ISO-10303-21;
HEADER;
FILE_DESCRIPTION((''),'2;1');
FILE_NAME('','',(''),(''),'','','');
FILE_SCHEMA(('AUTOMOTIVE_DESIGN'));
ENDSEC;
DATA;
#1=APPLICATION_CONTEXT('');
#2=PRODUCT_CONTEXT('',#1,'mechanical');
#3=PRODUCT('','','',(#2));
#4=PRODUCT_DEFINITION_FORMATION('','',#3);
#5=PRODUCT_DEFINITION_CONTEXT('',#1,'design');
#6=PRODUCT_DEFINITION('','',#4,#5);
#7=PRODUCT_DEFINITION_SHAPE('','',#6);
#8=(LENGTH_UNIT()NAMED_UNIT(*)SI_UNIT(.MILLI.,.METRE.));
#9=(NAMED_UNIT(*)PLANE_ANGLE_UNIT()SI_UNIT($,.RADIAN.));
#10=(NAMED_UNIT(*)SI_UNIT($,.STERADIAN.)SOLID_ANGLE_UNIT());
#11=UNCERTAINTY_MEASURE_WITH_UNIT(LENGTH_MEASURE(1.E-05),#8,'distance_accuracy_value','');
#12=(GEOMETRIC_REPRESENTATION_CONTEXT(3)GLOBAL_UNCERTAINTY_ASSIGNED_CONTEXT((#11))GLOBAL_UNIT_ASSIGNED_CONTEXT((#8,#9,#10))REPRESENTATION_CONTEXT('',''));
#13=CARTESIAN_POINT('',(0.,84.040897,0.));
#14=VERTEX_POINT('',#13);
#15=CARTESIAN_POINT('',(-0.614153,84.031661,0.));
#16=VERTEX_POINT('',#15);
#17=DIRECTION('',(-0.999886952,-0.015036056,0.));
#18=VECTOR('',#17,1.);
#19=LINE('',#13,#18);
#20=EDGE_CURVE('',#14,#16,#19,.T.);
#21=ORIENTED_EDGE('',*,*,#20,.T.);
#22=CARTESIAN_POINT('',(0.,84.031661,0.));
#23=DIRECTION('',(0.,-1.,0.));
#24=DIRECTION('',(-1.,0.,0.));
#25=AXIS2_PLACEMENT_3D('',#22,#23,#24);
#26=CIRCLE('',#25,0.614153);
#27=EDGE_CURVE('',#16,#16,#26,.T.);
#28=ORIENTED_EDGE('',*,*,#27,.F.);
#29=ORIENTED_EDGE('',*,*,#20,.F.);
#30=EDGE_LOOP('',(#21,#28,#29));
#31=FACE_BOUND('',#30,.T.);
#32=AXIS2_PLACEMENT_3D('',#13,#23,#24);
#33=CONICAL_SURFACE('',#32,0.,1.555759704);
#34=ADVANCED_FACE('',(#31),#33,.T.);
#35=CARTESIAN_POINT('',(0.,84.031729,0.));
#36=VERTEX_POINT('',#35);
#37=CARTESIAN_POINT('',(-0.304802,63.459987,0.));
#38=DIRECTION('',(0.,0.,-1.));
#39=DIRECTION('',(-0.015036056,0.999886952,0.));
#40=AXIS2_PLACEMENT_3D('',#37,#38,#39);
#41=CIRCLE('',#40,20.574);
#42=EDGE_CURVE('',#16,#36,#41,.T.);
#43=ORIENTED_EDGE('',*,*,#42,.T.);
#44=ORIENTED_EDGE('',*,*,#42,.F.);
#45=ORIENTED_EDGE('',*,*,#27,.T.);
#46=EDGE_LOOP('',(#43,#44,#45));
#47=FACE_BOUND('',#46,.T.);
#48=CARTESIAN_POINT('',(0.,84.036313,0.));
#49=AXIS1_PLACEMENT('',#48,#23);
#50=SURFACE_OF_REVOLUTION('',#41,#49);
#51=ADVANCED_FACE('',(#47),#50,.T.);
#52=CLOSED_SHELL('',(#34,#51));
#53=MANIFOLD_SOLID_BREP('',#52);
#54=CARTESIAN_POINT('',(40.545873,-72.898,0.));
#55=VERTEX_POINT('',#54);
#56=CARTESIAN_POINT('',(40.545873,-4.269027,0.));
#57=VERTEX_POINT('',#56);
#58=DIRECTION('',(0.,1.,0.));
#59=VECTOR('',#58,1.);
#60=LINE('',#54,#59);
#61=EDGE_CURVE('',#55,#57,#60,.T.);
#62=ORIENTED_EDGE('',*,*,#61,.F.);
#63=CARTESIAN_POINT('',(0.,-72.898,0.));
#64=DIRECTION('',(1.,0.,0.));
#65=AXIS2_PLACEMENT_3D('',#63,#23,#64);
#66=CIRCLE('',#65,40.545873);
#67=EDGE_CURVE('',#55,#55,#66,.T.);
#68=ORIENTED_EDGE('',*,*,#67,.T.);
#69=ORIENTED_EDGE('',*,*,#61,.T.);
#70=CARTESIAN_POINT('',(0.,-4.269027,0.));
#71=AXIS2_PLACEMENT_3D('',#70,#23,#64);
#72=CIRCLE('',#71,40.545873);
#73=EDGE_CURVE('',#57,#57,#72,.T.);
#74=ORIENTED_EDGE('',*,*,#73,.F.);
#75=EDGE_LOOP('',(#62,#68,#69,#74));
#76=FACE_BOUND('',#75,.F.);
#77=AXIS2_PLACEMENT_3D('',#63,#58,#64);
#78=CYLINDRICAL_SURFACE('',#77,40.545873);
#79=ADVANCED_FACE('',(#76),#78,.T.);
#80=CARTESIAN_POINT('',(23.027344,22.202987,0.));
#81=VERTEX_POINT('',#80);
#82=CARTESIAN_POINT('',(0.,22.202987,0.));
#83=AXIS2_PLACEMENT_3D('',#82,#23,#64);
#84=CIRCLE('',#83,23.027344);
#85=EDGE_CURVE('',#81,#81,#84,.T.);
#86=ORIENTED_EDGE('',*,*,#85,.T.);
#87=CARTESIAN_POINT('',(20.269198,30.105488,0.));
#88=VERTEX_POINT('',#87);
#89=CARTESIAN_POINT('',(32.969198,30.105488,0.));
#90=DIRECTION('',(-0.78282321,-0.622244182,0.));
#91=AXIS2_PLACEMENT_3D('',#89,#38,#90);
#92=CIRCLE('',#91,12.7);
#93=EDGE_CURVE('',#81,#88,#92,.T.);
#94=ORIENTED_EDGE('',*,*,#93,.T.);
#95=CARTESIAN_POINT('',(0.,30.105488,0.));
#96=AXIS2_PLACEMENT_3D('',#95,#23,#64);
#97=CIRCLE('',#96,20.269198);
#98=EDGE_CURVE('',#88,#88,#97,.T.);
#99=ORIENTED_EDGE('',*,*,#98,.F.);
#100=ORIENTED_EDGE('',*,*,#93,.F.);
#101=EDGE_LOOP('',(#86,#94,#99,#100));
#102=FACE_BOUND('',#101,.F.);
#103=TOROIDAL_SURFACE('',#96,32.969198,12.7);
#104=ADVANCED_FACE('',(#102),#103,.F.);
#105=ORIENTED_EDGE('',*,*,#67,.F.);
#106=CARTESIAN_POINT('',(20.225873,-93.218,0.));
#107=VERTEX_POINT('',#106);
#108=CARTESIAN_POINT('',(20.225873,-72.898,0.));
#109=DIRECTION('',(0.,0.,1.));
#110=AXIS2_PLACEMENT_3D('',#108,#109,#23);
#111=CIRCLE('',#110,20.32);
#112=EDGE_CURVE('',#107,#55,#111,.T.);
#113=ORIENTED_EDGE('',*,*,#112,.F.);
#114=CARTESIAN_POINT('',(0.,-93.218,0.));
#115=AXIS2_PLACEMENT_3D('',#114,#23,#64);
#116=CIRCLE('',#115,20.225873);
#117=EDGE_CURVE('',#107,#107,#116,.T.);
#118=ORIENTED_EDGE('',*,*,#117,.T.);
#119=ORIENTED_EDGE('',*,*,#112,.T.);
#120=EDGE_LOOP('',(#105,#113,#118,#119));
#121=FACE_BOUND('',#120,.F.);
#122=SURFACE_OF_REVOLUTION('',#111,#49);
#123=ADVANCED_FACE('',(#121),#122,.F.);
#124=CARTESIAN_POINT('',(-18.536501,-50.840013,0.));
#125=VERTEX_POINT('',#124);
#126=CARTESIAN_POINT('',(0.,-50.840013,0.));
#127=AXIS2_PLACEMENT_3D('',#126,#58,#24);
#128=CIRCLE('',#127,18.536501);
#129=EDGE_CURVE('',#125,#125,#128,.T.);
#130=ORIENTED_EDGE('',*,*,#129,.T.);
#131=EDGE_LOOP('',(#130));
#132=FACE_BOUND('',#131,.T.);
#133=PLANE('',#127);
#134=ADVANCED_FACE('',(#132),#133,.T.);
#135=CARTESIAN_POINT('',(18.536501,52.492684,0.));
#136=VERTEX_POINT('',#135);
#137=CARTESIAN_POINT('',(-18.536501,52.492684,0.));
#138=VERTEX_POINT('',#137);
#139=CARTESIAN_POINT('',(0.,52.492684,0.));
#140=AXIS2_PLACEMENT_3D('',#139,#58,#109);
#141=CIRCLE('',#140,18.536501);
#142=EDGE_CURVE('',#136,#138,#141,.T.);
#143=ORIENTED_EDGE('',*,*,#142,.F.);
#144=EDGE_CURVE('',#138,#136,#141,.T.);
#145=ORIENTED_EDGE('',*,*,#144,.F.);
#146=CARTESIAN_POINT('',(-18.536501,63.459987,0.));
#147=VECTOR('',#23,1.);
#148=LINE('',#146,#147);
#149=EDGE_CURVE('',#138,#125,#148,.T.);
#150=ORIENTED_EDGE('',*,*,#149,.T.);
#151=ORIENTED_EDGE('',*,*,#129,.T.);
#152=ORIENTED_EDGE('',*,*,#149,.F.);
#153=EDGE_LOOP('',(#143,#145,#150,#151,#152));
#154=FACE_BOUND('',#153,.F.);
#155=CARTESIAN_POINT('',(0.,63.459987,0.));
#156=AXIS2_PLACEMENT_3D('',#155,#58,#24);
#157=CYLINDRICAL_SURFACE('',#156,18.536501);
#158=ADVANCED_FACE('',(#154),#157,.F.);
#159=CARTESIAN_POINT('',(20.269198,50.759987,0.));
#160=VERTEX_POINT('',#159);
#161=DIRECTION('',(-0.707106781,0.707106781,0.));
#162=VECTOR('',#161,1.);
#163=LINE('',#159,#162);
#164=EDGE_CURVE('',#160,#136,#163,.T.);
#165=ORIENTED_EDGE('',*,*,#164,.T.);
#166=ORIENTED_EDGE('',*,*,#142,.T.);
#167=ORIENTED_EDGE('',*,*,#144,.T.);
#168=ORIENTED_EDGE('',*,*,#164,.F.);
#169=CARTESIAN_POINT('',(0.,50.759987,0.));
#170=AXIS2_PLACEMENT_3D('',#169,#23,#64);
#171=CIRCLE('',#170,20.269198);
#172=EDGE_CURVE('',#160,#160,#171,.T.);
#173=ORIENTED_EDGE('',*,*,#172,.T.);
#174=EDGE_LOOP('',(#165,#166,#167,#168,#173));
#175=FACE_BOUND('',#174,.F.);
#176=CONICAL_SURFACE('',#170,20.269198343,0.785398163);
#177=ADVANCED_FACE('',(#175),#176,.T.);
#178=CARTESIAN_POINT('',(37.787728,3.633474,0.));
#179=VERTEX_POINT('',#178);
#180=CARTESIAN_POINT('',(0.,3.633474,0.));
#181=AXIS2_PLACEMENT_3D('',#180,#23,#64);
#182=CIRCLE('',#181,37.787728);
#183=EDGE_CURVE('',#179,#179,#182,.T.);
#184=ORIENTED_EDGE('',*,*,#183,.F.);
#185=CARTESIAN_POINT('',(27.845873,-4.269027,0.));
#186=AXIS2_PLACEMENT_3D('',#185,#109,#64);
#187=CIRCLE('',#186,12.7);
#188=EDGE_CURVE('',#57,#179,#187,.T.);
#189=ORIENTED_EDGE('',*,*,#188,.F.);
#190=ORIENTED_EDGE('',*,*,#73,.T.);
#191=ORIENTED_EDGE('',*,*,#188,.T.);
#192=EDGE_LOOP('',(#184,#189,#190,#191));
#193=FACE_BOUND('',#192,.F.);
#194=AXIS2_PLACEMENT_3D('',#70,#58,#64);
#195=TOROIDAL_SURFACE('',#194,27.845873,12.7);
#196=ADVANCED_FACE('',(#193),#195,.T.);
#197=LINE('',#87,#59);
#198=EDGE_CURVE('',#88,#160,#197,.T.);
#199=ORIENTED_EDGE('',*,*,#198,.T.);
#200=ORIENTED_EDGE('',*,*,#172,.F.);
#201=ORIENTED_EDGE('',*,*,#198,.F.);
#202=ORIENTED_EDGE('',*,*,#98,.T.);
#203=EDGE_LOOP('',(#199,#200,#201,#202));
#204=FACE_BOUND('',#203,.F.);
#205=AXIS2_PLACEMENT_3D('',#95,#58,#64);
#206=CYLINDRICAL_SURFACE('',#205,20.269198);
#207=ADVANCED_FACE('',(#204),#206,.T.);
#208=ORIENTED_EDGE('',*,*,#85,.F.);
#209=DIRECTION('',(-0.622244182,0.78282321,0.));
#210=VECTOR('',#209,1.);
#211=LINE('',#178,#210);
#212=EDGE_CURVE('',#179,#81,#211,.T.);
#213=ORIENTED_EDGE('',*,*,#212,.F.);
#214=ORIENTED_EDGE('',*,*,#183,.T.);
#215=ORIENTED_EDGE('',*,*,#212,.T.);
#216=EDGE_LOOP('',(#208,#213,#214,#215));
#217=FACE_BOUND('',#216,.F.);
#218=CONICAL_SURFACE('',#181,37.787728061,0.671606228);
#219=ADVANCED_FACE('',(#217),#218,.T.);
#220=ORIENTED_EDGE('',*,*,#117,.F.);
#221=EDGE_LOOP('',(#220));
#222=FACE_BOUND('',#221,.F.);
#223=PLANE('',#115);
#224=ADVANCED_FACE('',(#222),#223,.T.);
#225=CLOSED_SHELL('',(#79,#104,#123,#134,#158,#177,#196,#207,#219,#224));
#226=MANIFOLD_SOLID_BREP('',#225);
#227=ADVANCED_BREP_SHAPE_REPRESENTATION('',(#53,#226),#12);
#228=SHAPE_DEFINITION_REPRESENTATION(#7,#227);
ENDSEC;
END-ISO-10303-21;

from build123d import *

# Parameters (mm, degrees)
F5_R     = 18.5365010698
F6_DEPTH = 114.3


# Not quite as in the source:
# - a fillet or chamfer that OpenCascade refuses, or shapes differently, is made with other operations: its cross-section is extruded or revolved along the edge and cut away or added


with BuildPart() as f1:
    # F0 (on Top) → F1 (revolve)
    with BuildSketch(Plane.XY):
        with BuildLine():
            Line((0, 84.0317292744), (0, 84.0408968434))
            Line((0, 84.0408968434), (-0.6141534664, 84.0316613536))
            ThreePointArc((-0.6141534664, 84.0316613536), (-0.3070769866, 84.0339870748), (0, 84.0317292744))
        make_face()
    revolve(axis=Axis((0, 84.0363130589, 0), (0, -1, 0)))


with BuildPart() as f1b:
    # F0 (on Top) → F1, piece 2 (revolve)
    with BuildSketch(Plane.XY):
        with BuildLine():
            Line((0, 63.4599872006), (0, -93.2180002618))
            Line((0, -93.2180002618), (20.2258732946, -93.2180002618))
            ThreePointArc((20.2258732946, -93.2180002618), (34.5942830883, -87.2664100555), (40.5458732946, -72.8980002618))
            Line((40.5458732946, -72.8980002618), (40.5458732946, -4.2690273975))
            ThreePointArc((40.5458732946, -4.2690273975), (39.8365270619, -0.084027728), (37.7877280609, 3.6334737133))
            Line((37.7877280609, 3.6334737133), (23.0273435769, 22.2029869316))
            ThreePointArc((23.0273435769, 22.2029869316), (20.9785445759, 25.9204883728), (20.2691983432, 30.1054880424))
            Line((20.2691983432, 30.1054880424), (20.2691983432, 63.4599872006))
            Line((20.2691983432, 63.4599872006), (0, 63.4599872006))
        make_face()
    revolve(axis=Axis((0, 84.0363130589, 0), (0, -1, 0)))

    # F5 (on face) → F6 (cut)
    with BuildSketch(Plane(origin=(0, 63.4599872006, 0), x_dir=(-1, 0, 0), z_dir=(0, 1, 0))):
        Circle(F5_R)
    extrude(amount=-F6_DEPTH, mode=Mode.SUBTRACT)

    # F7: chamfer of 12.7 on 1 edges, made by hand

    # F7_s1 → F7_t2 (revolve, cut)
    with BuildSketch(Plane.XY):
        Polygon((20.2691983432, 50.7599872006), (7.5691983432, 63.4599872006), (20.2691983432, 63.4599872006), align=None)
    revolve(axis=Axis((0, 63.4599872006, 0), (0, -1, 0)), mode=Mode.SUBTRACT)


with BuildPart() as f3:
    # F2 (on Top) → F3 (revolve)
    with BuildSketch(Plane.XY):
        Polygon((0, 62.8846511245), (0, 21.3541854173), (23.9753127098, 21.3541854173), (8.4013864398, 62.8846511245), align=None)
    revolve(axis=Axis((0, 42.1194182709, 0), (0, -1, 0)))


solid = Compound([f1.part, f1b.part])
